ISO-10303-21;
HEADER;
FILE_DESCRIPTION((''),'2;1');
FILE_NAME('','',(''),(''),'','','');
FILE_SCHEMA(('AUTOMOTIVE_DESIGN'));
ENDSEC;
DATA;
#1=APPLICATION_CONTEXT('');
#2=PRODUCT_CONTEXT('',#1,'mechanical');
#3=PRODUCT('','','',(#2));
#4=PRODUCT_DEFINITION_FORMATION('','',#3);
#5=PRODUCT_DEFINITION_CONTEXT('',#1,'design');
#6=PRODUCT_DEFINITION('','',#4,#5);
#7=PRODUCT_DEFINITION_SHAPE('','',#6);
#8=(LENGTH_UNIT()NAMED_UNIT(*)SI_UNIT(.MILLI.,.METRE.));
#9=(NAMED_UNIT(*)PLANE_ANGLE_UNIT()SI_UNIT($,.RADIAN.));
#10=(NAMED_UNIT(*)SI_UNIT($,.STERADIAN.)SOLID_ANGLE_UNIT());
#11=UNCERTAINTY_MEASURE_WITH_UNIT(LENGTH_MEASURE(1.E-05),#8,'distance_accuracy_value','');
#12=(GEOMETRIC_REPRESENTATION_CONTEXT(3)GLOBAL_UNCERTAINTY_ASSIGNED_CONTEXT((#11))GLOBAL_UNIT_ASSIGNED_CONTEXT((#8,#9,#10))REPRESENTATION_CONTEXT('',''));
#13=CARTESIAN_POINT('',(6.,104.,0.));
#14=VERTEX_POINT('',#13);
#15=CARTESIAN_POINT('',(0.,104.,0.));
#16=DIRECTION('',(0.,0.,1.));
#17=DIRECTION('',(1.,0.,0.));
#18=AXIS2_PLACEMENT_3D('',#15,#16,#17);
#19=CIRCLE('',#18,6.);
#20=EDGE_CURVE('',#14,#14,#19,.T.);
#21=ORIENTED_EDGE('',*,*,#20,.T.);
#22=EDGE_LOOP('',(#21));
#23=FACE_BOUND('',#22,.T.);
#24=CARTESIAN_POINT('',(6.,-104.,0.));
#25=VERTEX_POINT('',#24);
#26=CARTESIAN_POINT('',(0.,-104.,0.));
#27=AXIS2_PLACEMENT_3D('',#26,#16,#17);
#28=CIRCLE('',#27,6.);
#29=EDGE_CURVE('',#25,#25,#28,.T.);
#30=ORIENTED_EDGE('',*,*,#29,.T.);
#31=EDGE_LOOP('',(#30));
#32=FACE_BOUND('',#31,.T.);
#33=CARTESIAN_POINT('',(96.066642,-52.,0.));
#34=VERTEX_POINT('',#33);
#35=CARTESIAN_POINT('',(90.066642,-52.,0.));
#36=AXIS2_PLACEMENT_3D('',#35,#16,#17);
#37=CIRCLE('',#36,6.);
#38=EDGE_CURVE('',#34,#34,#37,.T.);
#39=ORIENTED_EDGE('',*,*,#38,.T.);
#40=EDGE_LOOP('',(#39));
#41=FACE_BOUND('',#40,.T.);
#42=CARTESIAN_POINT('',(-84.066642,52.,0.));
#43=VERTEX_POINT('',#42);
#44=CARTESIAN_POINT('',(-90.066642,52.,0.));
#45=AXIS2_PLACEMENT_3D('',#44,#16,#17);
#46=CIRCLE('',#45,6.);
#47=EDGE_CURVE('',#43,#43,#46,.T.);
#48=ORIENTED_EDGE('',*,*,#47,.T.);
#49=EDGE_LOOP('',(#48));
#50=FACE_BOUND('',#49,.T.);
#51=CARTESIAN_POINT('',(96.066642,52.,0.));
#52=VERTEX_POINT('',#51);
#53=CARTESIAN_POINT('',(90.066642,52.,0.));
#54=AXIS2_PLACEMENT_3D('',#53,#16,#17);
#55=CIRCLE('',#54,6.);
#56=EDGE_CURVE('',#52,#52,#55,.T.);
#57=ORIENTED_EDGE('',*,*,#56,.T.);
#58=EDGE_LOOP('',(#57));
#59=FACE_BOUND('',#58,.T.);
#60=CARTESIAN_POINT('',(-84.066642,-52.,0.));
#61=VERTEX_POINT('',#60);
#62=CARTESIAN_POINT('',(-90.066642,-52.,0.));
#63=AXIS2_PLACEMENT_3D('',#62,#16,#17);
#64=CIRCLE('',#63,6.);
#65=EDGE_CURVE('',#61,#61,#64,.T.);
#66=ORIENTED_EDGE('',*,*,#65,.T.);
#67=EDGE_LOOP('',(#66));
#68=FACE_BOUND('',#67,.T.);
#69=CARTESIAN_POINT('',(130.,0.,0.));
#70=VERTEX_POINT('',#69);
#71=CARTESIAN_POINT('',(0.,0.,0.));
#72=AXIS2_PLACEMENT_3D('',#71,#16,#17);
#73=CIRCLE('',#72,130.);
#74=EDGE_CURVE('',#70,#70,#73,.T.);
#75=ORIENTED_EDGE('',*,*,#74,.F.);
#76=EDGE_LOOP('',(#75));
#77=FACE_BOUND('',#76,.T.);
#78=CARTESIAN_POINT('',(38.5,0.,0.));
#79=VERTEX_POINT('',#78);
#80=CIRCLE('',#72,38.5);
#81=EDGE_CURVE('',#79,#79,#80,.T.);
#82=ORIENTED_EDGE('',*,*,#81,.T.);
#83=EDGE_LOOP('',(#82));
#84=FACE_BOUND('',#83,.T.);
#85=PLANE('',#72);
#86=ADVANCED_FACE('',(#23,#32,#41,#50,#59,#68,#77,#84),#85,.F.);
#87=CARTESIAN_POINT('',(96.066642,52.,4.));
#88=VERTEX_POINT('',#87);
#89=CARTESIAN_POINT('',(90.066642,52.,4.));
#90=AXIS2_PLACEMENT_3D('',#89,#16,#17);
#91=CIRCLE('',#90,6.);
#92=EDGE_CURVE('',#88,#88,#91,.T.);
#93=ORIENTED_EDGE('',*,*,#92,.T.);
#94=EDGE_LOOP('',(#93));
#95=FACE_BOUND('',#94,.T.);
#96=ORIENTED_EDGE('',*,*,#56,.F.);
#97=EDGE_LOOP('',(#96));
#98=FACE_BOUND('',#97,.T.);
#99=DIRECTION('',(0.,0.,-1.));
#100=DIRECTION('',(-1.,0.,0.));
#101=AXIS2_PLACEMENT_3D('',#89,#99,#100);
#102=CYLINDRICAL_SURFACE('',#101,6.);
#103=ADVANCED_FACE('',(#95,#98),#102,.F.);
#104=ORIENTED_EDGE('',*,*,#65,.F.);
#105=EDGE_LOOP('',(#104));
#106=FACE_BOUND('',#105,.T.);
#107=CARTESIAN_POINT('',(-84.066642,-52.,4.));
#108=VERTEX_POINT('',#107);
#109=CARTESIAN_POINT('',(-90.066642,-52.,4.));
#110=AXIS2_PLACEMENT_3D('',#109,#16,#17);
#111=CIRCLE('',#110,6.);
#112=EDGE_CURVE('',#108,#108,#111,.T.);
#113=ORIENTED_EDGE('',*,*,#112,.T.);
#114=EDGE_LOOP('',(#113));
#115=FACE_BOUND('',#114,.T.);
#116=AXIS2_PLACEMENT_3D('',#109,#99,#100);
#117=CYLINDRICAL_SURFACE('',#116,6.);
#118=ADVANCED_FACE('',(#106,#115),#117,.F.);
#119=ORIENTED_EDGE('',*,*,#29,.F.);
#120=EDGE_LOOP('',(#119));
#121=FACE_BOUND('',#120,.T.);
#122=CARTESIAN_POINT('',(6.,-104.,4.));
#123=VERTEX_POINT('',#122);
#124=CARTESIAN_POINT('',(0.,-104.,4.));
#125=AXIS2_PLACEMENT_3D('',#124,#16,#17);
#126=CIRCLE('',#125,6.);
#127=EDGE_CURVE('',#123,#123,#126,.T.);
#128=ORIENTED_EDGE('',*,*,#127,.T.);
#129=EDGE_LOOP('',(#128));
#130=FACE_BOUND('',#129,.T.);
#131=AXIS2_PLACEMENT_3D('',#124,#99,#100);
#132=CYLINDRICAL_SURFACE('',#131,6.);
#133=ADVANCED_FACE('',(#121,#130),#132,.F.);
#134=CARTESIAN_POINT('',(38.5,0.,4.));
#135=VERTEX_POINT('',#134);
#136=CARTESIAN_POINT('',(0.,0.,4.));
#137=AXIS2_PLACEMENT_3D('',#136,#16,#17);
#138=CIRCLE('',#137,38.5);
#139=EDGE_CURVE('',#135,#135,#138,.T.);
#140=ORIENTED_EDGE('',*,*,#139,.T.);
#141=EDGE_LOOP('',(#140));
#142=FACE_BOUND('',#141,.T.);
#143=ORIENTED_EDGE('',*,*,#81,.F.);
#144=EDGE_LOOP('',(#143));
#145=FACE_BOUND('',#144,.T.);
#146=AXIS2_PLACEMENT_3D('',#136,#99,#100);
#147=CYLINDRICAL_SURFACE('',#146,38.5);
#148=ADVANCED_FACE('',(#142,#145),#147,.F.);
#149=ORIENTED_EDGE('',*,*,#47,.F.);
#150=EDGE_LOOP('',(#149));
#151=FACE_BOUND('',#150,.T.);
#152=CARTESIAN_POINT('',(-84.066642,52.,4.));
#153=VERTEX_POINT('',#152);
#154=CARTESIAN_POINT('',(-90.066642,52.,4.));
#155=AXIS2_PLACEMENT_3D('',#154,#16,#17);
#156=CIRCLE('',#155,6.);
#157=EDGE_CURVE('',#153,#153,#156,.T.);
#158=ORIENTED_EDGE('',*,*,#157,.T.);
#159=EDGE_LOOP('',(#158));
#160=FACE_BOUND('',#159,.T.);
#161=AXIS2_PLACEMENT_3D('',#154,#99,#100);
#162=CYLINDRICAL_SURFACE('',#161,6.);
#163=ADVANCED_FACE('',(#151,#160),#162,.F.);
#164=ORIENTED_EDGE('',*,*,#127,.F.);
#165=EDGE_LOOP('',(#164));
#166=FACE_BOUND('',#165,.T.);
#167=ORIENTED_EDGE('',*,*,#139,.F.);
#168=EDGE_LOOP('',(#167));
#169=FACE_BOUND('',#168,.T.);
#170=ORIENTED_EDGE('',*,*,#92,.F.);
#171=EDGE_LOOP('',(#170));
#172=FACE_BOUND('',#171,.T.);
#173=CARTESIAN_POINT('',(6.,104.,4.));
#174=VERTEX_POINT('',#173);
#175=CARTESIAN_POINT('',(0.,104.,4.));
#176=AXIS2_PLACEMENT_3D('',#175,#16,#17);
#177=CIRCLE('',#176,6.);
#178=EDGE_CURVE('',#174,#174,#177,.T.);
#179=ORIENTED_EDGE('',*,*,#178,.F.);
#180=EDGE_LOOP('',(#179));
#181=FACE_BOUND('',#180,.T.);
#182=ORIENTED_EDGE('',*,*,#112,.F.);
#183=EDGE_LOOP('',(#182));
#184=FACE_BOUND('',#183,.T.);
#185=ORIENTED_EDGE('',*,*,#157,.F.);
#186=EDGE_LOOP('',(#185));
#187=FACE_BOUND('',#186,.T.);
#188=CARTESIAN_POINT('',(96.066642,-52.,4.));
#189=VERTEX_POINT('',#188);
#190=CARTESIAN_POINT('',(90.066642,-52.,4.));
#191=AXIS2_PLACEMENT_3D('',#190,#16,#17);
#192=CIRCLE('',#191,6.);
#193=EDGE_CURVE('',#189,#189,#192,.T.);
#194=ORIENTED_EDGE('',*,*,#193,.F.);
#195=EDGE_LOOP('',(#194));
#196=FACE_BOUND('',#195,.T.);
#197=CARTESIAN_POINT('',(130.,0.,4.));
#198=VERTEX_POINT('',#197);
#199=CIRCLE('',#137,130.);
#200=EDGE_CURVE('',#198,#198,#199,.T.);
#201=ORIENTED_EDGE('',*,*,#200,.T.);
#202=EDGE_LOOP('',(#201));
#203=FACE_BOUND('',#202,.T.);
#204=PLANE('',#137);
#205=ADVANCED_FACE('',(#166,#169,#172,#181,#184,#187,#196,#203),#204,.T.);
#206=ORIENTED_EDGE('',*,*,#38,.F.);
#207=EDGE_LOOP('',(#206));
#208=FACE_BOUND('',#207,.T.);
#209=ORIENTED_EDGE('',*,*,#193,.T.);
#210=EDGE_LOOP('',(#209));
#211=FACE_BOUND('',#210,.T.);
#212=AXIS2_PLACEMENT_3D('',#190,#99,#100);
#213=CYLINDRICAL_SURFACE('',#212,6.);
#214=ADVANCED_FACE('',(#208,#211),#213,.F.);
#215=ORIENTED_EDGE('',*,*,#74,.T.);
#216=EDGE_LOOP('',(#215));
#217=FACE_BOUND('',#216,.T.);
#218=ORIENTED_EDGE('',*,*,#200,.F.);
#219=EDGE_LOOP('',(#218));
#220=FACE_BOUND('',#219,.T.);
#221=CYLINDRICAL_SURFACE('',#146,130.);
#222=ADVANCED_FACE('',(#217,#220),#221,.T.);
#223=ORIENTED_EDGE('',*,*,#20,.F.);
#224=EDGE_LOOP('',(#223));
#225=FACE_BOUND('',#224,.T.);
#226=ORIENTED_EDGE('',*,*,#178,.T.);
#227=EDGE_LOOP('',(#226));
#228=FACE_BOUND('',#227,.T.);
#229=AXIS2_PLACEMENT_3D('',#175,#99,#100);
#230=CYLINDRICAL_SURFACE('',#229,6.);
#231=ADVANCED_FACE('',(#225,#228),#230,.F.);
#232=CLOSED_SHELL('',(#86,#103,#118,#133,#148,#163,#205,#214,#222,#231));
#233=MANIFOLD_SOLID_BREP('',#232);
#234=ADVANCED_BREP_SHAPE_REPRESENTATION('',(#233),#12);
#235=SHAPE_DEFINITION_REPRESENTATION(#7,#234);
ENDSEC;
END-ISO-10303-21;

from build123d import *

# Parameters (mm, degrees)
SKETCH_1_R             = 130
SKETCH_1_R_2           = 38.5
SKETCH_1_R_3           = 6
SM_BASE_FLANGE_1_DEPTH = 4


# Sheet-metal steps are written as plain solids
with BuildPart() as part:
    # Sketch 1 → Базовая кромка1 (new body)
    with BuildSketch(Plane.XY):
        Circle(SKETCH_1_R)
        Circle(SKETCH_1_R_2, mode=Mode.SUBTRACT)
        with Locations((0, 104)):
            Circle(SKETCH_1_R_3, mode=Mode.SUBTRACT)
        with Locations((90.066641994, 52)):
            Circle(SKETCH_1_R_3, mode=Mode.SUBTRACT)
        with Locations((90.066641994, -52)):
            Circle(SKETCH_1_R_3, mode=Mode.SUBTRACT)
        with Locations((0, -104)):
            Circle(SKETCH_1_R_3, mode=Mode.SUBTRACT)
        with Locations((-90.066641994, -52)):
            Circle(SKETCH_1_R_3, mode=Mode.SUBTRACT)
        with Locations((-90.066641994, 52)):
            Circle(SKETCH_1_R_3, mode=Mode.SUBTRACT)
    extrude(amount=SM_BASE_FLANGE_1_DEPTH)


solid = part.part
